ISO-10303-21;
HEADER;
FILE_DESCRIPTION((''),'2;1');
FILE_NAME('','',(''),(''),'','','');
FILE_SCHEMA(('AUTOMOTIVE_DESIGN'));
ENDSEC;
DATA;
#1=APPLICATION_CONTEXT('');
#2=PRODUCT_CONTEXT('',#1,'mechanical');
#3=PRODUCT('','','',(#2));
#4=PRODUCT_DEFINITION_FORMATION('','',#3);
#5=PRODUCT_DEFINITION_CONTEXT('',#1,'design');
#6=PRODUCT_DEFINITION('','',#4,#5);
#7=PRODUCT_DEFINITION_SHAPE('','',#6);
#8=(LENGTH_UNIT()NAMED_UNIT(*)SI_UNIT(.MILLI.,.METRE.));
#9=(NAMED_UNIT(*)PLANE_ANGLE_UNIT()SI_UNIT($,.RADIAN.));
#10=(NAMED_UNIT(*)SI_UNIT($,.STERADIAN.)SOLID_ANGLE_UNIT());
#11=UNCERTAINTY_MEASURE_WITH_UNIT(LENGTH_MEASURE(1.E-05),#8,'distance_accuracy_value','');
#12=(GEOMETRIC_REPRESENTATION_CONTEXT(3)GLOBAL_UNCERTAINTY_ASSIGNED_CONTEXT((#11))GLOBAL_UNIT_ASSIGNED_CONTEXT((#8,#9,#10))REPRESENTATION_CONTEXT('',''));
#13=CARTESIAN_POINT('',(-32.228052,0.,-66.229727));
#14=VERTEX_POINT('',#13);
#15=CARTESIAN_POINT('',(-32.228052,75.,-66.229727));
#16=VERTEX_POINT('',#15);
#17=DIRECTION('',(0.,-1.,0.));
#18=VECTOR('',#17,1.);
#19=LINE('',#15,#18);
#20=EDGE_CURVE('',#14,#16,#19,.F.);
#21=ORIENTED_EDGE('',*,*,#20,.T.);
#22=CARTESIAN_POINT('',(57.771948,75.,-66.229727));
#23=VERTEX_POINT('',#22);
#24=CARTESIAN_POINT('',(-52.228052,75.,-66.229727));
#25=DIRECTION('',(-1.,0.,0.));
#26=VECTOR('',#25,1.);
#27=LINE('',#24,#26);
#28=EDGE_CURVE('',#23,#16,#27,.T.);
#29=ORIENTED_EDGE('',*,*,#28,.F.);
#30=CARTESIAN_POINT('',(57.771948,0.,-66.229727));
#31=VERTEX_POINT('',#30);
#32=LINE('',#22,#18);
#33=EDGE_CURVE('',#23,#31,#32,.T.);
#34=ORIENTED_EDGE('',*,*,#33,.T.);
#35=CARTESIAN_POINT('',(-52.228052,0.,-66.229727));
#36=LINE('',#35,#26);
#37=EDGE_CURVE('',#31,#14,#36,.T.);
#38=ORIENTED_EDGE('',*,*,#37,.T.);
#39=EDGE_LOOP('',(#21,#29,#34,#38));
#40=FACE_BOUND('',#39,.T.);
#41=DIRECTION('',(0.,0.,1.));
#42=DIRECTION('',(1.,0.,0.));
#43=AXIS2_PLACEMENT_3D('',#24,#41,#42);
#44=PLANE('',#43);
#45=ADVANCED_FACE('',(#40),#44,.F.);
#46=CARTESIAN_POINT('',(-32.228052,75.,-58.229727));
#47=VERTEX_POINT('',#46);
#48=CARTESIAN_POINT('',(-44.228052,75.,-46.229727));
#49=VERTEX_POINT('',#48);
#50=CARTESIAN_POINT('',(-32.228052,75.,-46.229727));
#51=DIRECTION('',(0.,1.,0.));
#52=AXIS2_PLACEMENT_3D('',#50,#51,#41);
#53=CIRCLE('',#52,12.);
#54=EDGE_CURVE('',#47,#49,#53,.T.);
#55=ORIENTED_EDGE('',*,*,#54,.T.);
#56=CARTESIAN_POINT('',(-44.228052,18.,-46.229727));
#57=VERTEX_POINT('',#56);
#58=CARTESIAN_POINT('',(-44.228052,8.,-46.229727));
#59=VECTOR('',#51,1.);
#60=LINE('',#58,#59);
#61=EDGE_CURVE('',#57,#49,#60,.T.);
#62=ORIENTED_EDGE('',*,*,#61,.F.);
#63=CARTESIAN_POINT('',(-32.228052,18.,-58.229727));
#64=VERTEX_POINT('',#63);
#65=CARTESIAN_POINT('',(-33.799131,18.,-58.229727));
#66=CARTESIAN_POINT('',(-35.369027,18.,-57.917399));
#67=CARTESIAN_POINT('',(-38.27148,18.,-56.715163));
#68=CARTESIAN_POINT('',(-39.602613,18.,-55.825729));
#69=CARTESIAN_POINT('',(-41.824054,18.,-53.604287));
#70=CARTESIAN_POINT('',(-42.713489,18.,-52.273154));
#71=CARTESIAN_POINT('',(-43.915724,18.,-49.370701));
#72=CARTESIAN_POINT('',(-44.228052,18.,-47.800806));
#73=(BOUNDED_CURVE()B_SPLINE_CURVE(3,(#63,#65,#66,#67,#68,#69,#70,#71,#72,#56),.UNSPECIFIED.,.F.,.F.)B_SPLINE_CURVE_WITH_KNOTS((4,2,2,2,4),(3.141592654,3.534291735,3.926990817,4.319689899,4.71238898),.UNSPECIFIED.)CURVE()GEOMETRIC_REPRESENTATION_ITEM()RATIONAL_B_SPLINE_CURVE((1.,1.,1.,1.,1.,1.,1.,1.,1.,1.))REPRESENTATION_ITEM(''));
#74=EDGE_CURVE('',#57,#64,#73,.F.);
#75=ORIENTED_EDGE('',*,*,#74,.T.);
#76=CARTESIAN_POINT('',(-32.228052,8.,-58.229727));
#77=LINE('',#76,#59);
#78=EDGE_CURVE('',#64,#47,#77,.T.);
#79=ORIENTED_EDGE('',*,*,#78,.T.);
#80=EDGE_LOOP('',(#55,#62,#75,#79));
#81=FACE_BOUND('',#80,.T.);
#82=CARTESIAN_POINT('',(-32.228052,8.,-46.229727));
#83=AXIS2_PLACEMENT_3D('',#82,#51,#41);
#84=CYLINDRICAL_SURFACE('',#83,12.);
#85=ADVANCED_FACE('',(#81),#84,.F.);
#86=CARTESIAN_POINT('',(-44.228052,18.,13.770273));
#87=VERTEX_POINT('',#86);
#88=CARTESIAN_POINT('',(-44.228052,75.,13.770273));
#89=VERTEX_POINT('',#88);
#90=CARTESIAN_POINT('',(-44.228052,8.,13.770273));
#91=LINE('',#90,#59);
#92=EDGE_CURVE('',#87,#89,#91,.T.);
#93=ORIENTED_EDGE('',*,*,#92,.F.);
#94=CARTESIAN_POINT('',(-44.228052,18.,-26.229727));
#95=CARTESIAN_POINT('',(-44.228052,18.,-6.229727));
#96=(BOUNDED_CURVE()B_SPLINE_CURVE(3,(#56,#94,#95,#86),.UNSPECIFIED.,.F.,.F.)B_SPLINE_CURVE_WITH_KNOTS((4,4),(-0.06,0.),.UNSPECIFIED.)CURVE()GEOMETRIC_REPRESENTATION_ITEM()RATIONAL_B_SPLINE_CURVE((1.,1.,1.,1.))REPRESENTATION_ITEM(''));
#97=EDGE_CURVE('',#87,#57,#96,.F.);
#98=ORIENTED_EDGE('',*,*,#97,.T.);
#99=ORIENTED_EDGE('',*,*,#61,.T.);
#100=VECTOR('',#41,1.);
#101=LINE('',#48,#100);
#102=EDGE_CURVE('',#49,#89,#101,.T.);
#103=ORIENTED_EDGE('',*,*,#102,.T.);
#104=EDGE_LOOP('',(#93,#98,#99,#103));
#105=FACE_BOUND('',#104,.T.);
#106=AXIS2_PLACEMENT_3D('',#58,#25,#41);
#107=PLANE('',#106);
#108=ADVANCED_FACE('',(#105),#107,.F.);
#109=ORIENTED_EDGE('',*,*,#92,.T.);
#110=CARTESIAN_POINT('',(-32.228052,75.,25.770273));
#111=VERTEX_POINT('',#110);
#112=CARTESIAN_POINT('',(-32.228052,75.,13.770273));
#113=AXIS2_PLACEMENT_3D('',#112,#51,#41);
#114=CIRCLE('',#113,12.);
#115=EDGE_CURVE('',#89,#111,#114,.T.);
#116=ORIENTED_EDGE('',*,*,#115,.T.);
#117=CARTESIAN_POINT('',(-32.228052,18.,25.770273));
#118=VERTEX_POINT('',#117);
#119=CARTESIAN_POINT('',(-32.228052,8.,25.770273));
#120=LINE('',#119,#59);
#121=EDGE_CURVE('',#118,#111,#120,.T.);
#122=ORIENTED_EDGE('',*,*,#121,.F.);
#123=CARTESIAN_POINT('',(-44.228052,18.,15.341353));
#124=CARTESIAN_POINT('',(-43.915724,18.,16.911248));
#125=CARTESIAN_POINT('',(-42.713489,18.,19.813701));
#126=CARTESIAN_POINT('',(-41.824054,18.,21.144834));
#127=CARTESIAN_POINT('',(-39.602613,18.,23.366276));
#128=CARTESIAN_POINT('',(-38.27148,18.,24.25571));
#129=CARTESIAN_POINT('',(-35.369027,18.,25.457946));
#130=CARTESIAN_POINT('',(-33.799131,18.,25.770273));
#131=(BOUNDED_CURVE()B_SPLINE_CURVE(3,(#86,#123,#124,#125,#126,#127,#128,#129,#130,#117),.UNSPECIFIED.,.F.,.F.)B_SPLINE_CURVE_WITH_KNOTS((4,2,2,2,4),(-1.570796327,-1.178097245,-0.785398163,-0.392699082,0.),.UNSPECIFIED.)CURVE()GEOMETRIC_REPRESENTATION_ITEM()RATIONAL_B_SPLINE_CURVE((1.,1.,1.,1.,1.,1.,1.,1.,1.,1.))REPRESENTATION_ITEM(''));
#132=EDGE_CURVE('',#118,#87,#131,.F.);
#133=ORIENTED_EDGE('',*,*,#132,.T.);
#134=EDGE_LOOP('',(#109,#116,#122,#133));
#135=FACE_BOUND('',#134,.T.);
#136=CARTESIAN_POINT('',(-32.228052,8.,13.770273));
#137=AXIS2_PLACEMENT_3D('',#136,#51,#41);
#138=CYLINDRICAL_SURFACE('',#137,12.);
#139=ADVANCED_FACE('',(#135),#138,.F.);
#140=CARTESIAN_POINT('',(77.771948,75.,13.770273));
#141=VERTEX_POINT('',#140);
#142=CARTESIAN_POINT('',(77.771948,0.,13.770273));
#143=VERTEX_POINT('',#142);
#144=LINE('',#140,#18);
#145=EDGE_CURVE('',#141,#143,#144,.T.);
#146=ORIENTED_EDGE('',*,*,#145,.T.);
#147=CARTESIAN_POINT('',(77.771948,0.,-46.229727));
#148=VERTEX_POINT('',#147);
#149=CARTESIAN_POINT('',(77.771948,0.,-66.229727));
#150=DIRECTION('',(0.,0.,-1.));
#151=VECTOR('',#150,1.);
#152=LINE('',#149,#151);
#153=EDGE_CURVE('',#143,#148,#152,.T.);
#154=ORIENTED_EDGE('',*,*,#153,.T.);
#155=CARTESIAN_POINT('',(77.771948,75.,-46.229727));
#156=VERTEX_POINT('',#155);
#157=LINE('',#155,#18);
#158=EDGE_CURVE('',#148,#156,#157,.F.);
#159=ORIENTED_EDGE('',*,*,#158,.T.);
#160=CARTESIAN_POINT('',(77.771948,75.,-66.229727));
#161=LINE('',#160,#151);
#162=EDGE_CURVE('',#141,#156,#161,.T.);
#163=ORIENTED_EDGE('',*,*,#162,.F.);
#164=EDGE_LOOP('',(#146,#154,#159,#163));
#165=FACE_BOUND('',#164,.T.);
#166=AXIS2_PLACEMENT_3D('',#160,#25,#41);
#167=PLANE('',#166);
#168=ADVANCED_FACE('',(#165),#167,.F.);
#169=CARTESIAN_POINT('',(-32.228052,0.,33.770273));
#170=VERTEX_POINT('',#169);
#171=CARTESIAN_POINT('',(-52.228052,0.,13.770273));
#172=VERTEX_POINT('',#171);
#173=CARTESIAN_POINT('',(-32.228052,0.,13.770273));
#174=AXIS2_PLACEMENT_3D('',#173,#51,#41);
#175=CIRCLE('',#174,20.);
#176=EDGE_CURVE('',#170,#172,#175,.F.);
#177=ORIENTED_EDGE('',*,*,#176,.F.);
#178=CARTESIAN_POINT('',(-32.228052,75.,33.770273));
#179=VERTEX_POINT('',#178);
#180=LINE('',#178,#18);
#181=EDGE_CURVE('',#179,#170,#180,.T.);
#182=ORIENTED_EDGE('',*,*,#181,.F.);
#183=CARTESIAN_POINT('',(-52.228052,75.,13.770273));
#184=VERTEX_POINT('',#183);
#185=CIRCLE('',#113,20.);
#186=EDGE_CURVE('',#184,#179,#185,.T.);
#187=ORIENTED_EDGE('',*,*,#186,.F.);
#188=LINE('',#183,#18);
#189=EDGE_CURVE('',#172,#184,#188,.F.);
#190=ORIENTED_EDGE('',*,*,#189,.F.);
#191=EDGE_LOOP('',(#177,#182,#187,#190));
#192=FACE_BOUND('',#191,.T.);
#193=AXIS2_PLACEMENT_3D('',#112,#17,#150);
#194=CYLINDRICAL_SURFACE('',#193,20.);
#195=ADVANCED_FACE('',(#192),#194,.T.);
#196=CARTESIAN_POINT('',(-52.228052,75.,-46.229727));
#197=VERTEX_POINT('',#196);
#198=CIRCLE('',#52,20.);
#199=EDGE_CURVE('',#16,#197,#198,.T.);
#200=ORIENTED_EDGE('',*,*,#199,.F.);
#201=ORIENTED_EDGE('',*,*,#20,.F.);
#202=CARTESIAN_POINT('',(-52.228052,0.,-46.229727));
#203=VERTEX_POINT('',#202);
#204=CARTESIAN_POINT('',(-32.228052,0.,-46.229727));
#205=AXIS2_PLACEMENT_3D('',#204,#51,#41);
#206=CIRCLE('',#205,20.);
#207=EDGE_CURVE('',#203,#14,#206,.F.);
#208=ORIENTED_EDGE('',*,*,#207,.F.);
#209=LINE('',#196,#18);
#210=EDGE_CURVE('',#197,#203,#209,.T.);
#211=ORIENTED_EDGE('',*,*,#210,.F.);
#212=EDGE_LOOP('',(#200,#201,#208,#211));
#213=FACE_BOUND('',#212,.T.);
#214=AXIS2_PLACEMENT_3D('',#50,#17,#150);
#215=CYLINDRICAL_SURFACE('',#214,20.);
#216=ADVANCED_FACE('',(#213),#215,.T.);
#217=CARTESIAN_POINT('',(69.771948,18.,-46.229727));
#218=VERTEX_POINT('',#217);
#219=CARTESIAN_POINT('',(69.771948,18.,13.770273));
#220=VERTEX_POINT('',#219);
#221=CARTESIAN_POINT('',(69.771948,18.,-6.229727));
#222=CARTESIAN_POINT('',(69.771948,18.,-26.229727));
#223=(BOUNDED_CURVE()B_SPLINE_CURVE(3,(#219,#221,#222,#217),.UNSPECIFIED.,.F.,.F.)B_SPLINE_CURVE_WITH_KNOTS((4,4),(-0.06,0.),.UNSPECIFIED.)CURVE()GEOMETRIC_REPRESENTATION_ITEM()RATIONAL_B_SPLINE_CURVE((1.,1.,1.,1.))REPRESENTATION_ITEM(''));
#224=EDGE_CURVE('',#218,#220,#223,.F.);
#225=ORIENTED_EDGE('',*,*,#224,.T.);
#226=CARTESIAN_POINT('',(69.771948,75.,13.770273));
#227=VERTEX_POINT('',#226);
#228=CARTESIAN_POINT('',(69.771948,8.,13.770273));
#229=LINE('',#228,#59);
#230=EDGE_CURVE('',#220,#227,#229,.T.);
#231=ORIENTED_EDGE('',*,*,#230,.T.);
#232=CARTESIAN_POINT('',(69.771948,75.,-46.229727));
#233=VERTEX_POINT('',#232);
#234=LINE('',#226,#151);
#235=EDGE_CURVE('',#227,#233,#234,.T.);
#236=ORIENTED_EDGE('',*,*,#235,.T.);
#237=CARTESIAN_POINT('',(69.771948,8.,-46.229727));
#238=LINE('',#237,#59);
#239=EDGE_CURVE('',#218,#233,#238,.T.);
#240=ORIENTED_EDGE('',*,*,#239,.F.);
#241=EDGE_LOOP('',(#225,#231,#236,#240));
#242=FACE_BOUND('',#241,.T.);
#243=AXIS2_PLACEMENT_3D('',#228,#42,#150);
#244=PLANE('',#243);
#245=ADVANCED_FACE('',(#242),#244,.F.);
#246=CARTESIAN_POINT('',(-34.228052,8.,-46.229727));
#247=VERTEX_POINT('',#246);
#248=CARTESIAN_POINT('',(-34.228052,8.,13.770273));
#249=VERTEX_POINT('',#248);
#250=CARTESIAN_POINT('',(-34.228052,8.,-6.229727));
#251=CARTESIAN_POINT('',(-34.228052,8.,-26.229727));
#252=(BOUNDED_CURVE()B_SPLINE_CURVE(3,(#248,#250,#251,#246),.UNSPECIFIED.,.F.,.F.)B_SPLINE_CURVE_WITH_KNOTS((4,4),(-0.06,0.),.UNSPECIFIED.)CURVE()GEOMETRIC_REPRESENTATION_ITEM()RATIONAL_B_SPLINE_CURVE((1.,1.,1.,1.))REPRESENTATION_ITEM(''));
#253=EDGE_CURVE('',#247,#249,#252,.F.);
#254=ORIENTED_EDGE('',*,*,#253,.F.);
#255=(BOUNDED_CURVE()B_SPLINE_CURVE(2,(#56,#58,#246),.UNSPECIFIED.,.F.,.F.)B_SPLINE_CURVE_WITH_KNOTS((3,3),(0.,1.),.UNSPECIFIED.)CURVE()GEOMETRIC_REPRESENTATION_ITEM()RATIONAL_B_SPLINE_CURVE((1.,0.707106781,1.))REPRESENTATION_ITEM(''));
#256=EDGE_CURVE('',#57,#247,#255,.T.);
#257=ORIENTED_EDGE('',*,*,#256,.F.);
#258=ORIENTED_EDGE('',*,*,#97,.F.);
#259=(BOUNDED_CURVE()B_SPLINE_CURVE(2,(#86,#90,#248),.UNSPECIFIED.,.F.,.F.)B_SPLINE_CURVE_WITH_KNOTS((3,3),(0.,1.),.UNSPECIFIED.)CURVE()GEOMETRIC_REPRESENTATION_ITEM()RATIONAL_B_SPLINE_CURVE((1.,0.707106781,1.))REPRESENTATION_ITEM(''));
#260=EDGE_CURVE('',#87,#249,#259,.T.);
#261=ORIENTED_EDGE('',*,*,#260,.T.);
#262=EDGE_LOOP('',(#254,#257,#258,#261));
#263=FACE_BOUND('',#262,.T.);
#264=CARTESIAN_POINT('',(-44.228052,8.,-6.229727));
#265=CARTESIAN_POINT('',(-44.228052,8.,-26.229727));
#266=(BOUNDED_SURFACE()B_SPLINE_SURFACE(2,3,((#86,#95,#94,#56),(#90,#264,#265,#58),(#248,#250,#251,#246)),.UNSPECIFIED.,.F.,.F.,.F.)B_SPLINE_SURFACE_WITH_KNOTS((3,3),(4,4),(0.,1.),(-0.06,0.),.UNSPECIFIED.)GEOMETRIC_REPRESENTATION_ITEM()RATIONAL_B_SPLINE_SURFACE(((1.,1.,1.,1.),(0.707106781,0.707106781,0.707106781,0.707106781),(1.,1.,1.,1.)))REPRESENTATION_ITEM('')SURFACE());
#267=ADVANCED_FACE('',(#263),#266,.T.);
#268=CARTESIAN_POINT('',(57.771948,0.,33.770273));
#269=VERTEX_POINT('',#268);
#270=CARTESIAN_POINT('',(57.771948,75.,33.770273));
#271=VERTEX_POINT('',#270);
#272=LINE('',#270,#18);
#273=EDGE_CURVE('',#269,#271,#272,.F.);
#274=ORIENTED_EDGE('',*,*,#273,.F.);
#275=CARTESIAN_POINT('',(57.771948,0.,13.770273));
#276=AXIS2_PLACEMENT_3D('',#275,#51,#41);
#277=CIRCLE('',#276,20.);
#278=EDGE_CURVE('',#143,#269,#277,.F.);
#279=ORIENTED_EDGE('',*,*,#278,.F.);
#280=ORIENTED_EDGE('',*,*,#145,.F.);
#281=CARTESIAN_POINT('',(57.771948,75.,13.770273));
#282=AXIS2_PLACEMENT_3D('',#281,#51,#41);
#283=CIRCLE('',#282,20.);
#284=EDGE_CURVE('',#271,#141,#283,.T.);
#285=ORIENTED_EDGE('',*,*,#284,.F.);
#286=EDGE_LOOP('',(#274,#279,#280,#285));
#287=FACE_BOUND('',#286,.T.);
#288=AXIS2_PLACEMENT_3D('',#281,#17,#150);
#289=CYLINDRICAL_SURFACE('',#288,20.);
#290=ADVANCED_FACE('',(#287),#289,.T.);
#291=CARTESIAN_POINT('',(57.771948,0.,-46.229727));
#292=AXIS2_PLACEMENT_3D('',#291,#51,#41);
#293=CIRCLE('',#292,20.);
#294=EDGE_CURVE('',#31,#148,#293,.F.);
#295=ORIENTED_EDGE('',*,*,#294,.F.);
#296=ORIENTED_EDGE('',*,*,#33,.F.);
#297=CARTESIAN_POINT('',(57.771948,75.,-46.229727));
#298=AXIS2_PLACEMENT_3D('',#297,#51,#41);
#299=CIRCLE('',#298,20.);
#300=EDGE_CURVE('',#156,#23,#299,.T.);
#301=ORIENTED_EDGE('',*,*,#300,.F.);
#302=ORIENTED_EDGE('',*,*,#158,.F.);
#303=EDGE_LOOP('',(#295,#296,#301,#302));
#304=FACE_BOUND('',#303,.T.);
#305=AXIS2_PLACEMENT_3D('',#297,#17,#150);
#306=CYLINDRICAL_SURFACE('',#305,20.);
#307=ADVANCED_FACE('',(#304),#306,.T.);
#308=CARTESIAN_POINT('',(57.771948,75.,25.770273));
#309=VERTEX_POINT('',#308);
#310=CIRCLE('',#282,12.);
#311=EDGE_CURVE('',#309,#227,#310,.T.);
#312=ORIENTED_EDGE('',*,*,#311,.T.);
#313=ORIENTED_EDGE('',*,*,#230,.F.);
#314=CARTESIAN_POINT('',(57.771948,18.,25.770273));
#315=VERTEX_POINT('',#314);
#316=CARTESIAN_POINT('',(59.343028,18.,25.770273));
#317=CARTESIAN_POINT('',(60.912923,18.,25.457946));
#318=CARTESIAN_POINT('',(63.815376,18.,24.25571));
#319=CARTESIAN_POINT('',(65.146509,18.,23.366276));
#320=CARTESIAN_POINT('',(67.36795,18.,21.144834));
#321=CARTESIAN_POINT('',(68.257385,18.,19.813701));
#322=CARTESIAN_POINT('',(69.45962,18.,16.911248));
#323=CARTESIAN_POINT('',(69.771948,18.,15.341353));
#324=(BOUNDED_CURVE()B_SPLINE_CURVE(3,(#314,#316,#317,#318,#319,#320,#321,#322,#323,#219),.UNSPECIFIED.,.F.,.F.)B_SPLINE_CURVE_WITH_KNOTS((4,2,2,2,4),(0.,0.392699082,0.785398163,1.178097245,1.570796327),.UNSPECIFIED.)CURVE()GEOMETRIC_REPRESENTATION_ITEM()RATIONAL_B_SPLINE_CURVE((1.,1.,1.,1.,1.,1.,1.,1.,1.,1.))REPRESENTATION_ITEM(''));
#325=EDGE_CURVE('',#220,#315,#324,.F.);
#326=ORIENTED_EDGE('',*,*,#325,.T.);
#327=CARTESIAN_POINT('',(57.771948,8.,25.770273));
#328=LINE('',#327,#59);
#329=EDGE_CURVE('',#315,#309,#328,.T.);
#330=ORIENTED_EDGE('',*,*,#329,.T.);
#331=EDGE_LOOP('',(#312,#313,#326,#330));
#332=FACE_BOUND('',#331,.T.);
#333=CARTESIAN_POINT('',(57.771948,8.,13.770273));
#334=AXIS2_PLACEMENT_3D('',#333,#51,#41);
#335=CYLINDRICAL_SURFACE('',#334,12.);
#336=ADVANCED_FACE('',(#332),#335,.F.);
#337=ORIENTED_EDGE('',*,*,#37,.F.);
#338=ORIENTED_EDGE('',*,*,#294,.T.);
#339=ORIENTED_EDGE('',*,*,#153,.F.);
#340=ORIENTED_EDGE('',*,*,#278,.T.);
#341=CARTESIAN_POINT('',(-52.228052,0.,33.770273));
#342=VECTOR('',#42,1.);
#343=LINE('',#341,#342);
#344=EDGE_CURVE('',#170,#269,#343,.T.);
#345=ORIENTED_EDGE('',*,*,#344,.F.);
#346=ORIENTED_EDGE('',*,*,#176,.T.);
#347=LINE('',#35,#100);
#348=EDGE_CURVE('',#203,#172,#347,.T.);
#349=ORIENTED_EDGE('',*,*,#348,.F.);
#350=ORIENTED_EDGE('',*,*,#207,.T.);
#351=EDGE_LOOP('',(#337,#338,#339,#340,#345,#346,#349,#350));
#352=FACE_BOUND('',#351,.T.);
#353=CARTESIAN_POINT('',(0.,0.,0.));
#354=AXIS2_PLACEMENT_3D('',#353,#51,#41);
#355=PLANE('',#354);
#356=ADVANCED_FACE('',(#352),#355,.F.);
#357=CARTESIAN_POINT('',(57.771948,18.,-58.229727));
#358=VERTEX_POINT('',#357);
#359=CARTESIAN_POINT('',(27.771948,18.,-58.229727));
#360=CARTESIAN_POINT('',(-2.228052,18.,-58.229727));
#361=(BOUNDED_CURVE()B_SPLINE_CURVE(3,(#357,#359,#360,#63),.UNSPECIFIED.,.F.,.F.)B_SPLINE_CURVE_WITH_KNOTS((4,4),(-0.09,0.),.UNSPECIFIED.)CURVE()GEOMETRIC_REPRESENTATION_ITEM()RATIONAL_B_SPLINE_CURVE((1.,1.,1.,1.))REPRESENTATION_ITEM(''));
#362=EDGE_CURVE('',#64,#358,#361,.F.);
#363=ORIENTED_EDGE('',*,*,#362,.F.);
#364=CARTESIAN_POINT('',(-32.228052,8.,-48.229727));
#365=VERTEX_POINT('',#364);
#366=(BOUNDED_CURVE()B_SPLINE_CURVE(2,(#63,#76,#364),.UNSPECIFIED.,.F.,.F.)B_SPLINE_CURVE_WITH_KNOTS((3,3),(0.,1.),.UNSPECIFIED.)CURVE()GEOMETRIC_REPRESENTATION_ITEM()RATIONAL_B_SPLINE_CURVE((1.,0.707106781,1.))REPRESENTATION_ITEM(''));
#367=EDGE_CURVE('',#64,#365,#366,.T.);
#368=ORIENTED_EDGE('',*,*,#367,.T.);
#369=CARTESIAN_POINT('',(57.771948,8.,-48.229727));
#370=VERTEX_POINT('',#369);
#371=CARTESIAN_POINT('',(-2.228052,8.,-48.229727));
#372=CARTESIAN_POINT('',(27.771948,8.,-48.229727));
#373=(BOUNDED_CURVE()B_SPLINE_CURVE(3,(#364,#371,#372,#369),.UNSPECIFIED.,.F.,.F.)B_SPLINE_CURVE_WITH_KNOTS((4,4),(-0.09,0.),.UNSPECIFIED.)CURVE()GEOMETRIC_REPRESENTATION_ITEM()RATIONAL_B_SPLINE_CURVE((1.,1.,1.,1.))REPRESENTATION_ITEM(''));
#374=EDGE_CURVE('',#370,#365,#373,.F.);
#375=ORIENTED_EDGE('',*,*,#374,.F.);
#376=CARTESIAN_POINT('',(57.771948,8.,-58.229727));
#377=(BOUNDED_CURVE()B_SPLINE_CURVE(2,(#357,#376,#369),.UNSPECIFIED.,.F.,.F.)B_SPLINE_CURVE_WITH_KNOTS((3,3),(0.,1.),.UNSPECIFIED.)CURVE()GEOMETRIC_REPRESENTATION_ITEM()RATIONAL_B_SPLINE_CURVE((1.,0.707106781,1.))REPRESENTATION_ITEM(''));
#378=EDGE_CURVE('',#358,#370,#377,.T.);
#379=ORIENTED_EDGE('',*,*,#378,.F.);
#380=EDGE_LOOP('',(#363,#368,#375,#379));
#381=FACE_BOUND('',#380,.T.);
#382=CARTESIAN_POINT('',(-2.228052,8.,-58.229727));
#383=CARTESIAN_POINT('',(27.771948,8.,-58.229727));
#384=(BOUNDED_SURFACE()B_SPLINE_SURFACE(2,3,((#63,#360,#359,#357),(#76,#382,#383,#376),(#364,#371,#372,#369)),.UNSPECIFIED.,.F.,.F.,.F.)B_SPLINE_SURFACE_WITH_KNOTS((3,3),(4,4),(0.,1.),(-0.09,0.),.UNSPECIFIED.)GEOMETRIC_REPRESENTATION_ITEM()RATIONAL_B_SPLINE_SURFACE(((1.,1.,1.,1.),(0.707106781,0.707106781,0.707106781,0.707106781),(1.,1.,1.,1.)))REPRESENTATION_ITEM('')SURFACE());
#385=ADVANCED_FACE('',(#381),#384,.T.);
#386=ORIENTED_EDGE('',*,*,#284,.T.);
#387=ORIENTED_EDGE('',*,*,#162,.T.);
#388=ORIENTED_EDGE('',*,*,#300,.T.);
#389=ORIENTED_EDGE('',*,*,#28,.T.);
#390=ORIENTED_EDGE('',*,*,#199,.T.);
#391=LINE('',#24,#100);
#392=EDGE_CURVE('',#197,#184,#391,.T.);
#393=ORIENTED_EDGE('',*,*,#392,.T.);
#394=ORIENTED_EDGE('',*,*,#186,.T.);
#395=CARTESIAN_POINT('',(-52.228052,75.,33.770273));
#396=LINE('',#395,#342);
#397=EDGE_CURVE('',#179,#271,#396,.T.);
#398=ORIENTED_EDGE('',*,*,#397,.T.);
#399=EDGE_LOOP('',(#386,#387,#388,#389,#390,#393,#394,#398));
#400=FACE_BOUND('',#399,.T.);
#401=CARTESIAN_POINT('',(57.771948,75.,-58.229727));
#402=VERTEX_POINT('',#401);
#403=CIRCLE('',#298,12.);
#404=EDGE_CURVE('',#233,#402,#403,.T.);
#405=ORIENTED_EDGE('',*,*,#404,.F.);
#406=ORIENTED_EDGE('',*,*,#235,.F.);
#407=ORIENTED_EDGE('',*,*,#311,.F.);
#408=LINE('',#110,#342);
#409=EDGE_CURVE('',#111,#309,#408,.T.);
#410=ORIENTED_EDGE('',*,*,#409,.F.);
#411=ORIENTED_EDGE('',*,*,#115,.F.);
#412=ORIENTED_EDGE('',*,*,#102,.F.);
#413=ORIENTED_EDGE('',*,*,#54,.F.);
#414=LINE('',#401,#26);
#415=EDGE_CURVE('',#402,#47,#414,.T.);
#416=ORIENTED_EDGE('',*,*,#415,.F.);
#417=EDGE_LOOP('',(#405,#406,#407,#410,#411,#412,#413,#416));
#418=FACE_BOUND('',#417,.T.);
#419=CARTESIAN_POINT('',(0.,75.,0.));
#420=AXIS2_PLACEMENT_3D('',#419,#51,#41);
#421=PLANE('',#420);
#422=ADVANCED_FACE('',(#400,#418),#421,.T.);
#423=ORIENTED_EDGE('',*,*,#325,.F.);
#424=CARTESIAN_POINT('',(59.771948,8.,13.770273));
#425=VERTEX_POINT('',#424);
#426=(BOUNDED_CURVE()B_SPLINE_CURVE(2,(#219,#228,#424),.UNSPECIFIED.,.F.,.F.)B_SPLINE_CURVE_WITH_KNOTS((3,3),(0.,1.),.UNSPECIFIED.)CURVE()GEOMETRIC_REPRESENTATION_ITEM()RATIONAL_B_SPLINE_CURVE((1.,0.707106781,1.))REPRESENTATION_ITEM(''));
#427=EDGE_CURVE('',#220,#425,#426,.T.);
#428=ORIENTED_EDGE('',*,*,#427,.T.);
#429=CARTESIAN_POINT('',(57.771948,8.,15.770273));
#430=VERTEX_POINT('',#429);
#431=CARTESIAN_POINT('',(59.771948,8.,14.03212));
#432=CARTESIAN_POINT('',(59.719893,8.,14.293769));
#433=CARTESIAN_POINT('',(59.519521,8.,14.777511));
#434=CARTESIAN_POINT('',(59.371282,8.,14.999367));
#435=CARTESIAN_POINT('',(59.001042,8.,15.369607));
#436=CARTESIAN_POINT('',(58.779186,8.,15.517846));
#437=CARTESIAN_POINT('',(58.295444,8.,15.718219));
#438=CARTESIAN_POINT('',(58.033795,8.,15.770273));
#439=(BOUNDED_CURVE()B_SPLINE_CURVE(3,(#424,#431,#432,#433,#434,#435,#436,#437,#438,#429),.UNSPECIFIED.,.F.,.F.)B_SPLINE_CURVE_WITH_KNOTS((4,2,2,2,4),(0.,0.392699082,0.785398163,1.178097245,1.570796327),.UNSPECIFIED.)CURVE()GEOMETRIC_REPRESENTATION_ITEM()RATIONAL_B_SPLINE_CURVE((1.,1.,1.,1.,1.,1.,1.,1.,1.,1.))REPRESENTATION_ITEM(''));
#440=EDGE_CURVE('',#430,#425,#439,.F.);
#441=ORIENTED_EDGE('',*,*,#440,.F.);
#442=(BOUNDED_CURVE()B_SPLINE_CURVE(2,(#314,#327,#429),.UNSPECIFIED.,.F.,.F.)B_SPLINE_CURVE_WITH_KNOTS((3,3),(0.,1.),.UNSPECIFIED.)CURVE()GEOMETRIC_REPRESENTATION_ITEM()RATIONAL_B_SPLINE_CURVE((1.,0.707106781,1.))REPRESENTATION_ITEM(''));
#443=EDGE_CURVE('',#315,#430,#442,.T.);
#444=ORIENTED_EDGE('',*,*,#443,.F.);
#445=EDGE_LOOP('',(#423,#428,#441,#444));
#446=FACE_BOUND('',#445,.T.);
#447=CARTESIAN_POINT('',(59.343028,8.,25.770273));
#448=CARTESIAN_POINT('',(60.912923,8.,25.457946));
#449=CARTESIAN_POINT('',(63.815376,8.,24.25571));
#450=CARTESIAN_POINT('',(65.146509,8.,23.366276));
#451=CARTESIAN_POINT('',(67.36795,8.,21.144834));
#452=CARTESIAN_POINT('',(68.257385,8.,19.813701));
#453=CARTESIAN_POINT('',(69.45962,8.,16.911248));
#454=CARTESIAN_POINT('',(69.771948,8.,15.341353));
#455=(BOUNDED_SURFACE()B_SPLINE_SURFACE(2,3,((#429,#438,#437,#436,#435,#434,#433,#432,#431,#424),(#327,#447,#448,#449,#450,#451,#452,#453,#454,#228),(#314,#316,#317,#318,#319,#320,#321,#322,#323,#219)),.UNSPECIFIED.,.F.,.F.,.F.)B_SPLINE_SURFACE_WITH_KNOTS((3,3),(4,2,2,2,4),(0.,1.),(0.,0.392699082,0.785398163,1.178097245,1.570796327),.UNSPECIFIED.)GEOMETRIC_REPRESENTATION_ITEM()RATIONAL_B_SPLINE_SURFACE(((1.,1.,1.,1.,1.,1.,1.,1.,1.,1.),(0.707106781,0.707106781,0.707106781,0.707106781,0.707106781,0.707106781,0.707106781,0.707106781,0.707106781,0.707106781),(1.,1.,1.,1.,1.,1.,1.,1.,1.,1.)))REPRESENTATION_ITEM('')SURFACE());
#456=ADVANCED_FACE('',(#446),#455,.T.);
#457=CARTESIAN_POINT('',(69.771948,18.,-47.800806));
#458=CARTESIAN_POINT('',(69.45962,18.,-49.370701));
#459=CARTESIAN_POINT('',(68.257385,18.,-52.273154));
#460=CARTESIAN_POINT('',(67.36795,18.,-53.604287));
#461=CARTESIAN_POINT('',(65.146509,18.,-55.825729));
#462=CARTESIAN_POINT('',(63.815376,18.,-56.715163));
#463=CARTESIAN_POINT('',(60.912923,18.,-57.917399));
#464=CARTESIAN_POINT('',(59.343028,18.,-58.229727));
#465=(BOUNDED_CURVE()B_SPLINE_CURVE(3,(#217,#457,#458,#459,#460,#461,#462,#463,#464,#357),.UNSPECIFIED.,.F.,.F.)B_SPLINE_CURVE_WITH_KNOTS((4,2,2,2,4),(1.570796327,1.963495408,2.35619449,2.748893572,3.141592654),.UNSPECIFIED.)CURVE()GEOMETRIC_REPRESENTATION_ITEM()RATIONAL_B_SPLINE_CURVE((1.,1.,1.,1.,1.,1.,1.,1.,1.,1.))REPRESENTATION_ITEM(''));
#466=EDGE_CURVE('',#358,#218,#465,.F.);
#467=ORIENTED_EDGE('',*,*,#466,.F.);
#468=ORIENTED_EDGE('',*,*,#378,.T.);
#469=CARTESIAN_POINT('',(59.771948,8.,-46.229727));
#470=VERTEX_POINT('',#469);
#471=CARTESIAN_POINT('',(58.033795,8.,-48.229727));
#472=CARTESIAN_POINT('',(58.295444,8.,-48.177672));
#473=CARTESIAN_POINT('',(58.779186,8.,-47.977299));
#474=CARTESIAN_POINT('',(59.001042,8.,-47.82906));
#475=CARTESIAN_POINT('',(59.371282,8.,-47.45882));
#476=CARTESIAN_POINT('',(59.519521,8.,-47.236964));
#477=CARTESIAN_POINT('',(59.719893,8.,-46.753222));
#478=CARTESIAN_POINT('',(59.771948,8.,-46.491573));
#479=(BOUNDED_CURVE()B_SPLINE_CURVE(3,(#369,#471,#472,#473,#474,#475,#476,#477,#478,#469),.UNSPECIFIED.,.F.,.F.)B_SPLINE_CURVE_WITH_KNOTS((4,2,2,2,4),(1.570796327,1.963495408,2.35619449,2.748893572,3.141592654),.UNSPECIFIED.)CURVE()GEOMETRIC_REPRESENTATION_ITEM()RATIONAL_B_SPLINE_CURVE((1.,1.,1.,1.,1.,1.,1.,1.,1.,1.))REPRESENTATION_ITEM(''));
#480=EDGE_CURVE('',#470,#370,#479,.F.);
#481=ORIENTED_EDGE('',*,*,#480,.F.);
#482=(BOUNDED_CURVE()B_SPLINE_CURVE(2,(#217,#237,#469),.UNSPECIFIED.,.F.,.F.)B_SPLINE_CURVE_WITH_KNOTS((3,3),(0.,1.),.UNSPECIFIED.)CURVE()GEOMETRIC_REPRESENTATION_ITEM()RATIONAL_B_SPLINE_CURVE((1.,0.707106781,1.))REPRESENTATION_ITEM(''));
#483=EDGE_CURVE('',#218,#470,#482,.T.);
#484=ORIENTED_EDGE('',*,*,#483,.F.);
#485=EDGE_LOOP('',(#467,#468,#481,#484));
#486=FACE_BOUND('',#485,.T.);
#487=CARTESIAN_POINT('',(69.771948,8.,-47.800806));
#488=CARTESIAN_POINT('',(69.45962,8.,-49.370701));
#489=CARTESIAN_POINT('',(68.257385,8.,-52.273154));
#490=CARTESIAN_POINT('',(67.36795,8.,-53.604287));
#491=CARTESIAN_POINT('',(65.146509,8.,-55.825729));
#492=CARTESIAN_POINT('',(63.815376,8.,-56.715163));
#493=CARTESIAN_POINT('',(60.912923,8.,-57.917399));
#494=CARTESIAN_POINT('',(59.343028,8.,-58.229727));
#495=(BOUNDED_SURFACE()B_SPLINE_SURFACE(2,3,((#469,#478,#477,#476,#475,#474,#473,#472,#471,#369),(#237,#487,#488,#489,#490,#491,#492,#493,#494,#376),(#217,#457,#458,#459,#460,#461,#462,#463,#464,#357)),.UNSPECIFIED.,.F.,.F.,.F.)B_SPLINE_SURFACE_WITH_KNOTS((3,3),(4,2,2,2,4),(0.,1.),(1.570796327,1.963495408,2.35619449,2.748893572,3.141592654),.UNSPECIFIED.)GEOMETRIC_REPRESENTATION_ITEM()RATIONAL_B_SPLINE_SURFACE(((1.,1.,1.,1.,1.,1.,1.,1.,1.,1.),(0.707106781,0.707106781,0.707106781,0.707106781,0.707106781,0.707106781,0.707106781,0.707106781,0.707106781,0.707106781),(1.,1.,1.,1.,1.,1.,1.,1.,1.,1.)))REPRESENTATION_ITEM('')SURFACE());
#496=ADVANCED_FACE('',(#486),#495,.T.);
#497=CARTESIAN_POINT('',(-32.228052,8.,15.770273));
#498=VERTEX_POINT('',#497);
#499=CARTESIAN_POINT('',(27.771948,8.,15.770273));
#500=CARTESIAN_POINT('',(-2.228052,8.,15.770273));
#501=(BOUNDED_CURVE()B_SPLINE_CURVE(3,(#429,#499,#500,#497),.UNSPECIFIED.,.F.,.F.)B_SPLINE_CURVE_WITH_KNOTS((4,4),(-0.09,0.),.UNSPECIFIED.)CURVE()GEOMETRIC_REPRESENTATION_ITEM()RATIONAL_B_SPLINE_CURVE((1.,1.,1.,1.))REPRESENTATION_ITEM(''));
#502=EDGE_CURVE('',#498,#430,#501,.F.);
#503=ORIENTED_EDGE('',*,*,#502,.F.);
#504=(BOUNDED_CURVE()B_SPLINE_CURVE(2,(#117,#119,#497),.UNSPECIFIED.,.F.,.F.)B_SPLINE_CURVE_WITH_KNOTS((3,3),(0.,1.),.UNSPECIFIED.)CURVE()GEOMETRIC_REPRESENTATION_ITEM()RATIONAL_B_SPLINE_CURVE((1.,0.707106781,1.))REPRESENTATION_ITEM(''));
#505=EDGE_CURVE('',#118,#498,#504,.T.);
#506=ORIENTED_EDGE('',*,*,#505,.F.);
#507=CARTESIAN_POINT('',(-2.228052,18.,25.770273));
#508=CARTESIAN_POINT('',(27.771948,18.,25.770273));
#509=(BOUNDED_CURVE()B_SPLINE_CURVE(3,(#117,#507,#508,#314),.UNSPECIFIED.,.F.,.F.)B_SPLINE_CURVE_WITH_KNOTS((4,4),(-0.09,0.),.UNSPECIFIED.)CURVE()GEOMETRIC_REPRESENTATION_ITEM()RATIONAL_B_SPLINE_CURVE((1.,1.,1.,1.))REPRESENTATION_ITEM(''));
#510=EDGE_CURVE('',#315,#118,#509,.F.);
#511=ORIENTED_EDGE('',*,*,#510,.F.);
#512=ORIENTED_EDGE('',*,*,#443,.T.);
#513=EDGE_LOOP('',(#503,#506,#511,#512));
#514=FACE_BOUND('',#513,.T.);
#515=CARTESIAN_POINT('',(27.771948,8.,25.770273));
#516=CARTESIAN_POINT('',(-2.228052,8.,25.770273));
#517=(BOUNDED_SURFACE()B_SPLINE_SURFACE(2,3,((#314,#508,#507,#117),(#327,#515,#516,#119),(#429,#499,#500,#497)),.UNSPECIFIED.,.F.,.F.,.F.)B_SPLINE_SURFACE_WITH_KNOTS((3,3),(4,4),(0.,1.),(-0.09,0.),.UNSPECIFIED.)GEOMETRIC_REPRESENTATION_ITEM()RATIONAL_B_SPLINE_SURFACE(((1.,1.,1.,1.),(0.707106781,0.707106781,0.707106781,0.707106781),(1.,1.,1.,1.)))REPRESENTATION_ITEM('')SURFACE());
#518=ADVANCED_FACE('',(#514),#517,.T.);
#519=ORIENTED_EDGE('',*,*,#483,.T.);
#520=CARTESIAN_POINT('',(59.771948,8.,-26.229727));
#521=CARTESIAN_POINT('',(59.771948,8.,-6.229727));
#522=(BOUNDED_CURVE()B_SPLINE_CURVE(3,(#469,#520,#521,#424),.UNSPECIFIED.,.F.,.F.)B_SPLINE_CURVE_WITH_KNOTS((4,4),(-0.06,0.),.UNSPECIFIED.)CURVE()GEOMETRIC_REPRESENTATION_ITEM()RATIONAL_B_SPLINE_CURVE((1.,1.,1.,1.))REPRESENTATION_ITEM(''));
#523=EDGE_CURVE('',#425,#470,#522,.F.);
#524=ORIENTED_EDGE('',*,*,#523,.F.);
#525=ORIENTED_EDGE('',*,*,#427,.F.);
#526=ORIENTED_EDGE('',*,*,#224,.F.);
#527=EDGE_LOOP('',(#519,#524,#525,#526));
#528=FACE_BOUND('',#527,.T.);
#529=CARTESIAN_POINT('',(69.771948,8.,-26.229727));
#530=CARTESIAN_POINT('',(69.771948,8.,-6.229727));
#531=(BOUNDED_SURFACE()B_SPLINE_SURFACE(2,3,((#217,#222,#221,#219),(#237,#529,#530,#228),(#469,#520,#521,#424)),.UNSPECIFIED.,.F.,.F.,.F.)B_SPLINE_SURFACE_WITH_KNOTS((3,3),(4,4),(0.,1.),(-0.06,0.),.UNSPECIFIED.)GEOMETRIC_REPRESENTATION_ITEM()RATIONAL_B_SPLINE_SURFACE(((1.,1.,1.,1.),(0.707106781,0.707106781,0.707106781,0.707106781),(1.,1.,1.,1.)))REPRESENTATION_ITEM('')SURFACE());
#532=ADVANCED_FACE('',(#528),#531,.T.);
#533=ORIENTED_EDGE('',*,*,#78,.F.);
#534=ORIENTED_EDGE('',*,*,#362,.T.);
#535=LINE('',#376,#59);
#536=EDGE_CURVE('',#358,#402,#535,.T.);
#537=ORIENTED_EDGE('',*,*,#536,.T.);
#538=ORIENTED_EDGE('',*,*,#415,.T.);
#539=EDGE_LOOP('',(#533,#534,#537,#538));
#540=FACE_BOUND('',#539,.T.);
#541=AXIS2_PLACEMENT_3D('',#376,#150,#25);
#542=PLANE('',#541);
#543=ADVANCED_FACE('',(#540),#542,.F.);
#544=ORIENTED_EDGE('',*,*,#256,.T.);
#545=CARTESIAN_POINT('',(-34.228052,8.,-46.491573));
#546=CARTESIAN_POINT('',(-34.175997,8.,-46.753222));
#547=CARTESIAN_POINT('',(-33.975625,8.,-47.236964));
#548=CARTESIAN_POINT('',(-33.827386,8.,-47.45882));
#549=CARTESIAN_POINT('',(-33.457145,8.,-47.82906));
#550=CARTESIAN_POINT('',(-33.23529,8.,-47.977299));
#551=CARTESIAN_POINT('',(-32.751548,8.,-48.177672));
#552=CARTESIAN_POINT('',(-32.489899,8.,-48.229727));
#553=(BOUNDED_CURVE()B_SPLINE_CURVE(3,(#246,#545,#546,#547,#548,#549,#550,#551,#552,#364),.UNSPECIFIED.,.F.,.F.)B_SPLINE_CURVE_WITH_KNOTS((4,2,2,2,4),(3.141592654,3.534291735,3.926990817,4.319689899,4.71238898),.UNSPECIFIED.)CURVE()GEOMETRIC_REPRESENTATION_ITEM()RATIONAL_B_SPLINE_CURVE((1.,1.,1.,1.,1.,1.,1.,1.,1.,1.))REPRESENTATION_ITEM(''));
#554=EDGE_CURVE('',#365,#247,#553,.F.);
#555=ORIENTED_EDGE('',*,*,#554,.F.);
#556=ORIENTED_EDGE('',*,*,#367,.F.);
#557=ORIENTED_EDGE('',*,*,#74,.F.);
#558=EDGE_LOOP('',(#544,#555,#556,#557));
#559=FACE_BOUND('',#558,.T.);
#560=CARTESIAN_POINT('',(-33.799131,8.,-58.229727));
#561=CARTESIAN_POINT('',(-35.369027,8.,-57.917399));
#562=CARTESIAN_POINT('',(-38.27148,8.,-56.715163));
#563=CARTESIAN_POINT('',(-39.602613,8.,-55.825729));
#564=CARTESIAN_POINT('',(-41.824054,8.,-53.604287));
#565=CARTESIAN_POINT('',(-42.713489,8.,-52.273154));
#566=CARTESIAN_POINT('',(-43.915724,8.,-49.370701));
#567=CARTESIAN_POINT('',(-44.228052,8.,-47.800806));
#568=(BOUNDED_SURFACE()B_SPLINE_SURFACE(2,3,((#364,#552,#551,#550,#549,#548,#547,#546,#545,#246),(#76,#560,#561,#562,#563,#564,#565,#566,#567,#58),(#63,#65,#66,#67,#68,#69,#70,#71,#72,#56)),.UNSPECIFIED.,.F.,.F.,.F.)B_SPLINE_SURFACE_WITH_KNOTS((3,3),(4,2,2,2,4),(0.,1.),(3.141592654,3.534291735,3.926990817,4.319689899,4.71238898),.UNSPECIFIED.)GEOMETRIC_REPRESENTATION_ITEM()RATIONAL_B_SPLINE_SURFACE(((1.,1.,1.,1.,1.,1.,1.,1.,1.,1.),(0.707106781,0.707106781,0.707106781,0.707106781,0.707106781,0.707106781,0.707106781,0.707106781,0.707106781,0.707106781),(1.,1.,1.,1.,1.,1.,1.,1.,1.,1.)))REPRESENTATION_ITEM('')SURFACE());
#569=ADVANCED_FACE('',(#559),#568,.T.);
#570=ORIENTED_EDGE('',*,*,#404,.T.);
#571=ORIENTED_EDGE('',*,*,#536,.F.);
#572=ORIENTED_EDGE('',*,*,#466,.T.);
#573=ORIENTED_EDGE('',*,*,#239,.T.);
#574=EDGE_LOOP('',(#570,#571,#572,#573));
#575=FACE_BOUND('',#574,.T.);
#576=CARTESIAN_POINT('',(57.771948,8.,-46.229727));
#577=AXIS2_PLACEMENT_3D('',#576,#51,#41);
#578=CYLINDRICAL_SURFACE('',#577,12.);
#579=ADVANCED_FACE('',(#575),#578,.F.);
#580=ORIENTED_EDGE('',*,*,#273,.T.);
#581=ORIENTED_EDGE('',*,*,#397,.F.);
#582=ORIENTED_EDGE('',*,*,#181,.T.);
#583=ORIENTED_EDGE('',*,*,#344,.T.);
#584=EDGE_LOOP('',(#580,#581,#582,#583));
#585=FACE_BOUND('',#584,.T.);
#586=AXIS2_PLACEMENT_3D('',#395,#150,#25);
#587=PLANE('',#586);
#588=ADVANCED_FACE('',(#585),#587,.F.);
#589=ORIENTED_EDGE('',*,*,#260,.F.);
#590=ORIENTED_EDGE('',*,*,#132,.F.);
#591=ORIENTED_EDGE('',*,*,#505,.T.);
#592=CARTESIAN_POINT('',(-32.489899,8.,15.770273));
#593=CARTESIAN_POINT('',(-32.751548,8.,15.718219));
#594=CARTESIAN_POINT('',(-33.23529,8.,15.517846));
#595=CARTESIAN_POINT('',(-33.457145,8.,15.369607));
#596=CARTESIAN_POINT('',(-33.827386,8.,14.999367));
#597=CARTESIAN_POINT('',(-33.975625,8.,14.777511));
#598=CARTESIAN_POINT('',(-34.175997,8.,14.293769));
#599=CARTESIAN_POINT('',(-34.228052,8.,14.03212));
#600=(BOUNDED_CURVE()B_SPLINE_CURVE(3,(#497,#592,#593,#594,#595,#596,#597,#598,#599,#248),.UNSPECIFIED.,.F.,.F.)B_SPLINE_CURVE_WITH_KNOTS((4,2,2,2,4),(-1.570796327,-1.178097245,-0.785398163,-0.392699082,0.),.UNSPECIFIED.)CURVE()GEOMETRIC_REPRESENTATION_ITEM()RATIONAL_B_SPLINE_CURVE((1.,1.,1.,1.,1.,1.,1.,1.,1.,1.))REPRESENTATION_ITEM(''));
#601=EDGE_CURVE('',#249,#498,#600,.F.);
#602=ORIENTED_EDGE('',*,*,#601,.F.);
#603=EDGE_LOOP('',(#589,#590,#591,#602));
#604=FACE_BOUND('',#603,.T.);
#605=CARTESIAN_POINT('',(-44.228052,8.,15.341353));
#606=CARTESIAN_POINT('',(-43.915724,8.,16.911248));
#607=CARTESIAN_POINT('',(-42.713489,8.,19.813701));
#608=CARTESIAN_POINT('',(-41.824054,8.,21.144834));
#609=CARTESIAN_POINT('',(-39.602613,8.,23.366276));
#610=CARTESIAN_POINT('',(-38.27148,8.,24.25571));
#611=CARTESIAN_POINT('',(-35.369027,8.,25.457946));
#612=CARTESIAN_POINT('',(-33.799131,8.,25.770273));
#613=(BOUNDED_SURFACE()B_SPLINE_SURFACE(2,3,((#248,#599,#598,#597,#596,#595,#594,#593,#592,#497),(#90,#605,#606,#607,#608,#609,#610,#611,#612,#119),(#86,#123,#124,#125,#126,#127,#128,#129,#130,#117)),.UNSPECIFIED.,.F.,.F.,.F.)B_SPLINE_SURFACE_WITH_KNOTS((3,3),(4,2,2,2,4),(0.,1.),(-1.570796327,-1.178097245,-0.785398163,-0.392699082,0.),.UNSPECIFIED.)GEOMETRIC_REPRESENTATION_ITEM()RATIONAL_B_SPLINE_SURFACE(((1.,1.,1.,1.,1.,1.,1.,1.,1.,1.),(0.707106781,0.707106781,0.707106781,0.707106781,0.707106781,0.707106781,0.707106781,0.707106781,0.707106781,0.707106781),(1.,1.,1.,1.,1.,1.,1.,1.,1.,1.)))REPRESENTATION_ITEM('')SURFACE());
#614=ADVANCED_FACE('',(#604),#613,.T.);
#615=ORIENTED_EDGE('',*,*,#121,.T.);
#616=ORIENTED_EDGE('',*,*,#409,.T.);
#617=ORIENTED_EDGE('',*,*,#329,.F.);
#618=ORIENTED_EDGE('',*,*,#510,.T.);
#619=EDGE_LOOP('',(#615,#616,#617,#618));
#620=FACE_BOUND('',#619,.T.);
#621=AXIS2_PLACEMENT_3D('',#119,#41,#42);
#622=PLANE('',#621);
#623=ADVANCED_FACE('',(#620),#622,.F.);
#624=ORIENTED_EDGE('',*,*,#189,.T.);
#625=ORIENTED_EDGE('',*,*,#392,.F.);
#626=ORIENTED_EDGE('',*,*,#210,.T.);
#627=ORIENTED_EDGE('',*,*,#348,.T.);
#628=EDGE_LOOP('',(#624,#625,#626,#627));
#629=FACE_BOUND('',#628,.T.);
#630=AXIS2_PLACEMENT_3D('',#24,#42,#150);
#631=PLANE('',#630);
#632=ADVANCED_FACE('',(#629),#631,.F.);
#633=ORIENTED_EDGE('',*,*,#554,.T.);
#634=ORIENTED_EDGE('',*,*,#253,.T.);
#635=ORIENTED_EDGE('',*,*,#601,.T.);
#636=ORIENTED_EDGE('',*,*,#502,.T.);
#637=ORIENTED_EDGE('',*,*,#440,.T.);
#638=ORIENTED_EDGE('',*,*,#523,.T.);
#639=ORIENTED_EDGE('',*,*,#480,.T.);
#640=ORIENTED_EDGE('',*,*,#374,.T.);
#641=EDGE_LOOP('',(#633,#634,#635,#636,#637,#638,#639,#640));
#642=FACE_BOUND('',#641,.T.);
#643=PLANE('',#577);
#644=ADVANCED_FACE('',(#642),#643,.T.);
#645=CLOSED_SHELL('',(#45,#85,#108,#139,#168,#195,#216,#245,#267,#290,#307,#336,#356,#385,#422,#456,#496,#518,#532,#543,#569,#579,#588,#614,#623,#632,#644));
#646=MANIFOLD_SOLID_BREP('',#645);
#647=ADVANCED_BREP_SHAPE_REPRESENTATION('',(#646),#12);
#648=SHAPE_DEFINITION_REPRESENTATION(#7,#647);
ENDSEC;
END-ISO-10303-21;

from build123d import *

# Parameters (mm, degrees)
ESQUISSE4_W             = 130
ESQUISSE4_H             = 100
BOSS_EXTRU_4_DEPTH      = 75
CONG_5_R                = 20
ENL_V_MAT_EXTRU_1_DEPTH = 67
CONG_6_SIZE             = 10


with BuildPart() as part:
    # Esquisse4 → Boss.-Extru.4 (new body)
    with BuildSketch(Plane(origin=(0, 0, 0), x_dir=(1, 0, 0), z_dir=(0, 1, 0))):
        with Locations((12.771948074, 16.229726537)):
            Rectangle(ESQUISSE4_W, ESQUISSE4_H)
    extrude(amount=BOSS_EXTRU_4_DEPTH)

    # Congé5
    cong_5_edges = [part.edges().sort_by_distance(p)[0] for p in [
        (-52.228051926, 37.5, -66.229726537),
        (77.771948074, 37.5, -66.229726537),
        (77.771948074, 37.5, 33.770273463),
        (-52.228051926, 37.5, 33.770273463),
    ]]
    fillet(cong_5_edges, radius=CONG_5_R)

    # Esquisse5 → Enlèv. mat.-Extru.1 (cut)
    with BuildSketch(Plane(origin=(0, 75, 0), x_dir=(1, 0, 0), z_dir=(0, 1, 0))):
        with BuildLine():
            Line((57.771948074, 58.229726537), (-32.228051926, 58.229726537))
            ThreePointArc((-32.228051926, 58.229726537), (-40.713333301, 54.715007912), (-44.228051926, 46.229726537))
            Line((-44.228051926, 46.229726537), (-44.228051926, -13.770273463))
            ThreePointArc((-44.228051926, -13.770273463), (-40.713333301, -22.255554837), (-32.228051926, -25.770273463))
            Line((-32.228051926, -25.770273463), (57.771948074, -25.770273463))
            ThreePointArc((57.771948074, -25.770273463), (66.257229448, -22.255554837), (69.771948074, -13.770273463))
            Line((69.771948074, -13.770273463), (69.771948074, 46.229726537))
            ThreePointArc((69.771948074, 46.229726537), (66.257229448, 54.715007912), (57.771948074, 58.229726537))
        make_face()
    extrude(amount=-ENL_V_MAT_EXTRU_1_DEPTH, mode=Mode.SUBTRACT)

    # Congé6
    # a fillet whose section is not a circle: 10 mm, written as the material it adds along each edge
    with BuildSketch(Plane(origin=(57.771948074, 8, -46.229726537), x_dir=(1, 0, 0), z_dir=(0, 0, 1))) as cong_6_piece_1:
        with BuildLine():
            Bezier((12, CONG_6_SIZE), (12, 0), (12 - CONG_6_SIZE, 0), weights=[1, 0.707106781, 1])
            Line((12 - CONG_6_SIZE, 0), (12, 0))
            Line((12, 0), (12, CONG_6_SIZE))
        make_face()
    revolve(axis=Axis((57.771948074, 8, -46.229726537), (0, 1, 0)), revolution_arc=90)
    with BuildSketch(Plane(origin=(69.771948074, 8, 13.770273463), x_dir=(0, 1, 0), z_dir=(0, 0, -1)), Plane(origin=(-44.228051926, 8, -46.229726537), x_dir=(0, 1, 0), z_dir=(0, 0, 1))) as cong_6_piece_2:
        with BuildLine():
            Bezier((CONG_6_SIZE, 0), (0, 0), (0, -CONG_6_SIZE), weights=[1, 0.707106781, 1])
            Line((0, -CONG_6_SIZE), (0, 0))
            Line((0, 0), (CONG_6_SIZE, 0))
        make_face()
    extrude(amount=60)
    with BuildSketch(Plane(origin=(57.771948074, 8, 13.770273463), x_dir=(0, 0, 1), z_dir=(-1, 0, 0))) as cong_6_piece_3:
        with BuildLine():
            Bezier((12, CONG_6_SIZE), (12, 0), (12 - CONG_6_SIZE, 0), weights=[1, 0.707106781, 1])
            Line((12 - CONG_6_SIZE, 0), (12, 0))
            Line((12, 0), (12, CONG_6_SIZE))
        make_face()
    revolve(axis=Axis((57.771948074, 8, 13.770273463), (0, 1, 0)), revolution_arc=90)
    with BuildSketch(Plane(origin=(-32.228051926, 8, 25.770273463), x_dir=(0, 1, 0), z_dir=(1, 0, 0)), Plane(origin=(57.771948074, 8, -58.229726537), x_dir=(0, 1, 0), z_dir=(-1, 0, 0))) as cong_6_piece_4:
        with BuildLine():
            Bezier((CONG_6_SIZE, 0), (0, 0), (0, -CONG_6_SIZE), weights=[1, 0.707106781, 1])
            Line((0, -CONG_6_SIZE), (0, 0))
            Line((0, 0), (CONG_6_SIZE, 0))
        make_face()
    extrude(amount=90)
    with BuildSketch(Plane(origin=(-32.228051926, 8, 13.770273463), x_dir=(-1, 0, 0), z_dir=(0, 0, -1))) as cong_6_piece_5:
        with BuildLine():
            Bezier((12, CONG_6_SIZE), (12, 0), (12 - CONG_6_SIZE, 0), weights=[1, 0.707106781, 1])
            Line((12 - CONG_6_SIZE, 0), (12, 0))
            Line((12, 0), (12, CONG_6_SIZE))
        make_face()
    revolve(axis=Axis((-32.228051926, 8, 13.770273463), (0, 1, 0)), revolution_arc=90)
    with BuildSketch(Plane(origin=(-32.228051926, 8, -46.229726537), x_dir=(0, 0, -1), z_dir=(1, 0, 0))) as cong_6_piece_6:
        with BuildLine():
            Bezier((12, CONG_6_SIZE), (12, 0), (12 - CONG_6_SIZE, 0), weights=[1, 0.707106781, 1])
            Line((12 - CONG_6_SIZE, 0), (12, 0))
            Line((12, 0), (12, CONG_6_SIZE))
        make_face()
    revolve(axis=Axis((-32.228051926, 8, -46.229726537), (0, 1, 0)), revolution_arc=90)


solid = part.part
